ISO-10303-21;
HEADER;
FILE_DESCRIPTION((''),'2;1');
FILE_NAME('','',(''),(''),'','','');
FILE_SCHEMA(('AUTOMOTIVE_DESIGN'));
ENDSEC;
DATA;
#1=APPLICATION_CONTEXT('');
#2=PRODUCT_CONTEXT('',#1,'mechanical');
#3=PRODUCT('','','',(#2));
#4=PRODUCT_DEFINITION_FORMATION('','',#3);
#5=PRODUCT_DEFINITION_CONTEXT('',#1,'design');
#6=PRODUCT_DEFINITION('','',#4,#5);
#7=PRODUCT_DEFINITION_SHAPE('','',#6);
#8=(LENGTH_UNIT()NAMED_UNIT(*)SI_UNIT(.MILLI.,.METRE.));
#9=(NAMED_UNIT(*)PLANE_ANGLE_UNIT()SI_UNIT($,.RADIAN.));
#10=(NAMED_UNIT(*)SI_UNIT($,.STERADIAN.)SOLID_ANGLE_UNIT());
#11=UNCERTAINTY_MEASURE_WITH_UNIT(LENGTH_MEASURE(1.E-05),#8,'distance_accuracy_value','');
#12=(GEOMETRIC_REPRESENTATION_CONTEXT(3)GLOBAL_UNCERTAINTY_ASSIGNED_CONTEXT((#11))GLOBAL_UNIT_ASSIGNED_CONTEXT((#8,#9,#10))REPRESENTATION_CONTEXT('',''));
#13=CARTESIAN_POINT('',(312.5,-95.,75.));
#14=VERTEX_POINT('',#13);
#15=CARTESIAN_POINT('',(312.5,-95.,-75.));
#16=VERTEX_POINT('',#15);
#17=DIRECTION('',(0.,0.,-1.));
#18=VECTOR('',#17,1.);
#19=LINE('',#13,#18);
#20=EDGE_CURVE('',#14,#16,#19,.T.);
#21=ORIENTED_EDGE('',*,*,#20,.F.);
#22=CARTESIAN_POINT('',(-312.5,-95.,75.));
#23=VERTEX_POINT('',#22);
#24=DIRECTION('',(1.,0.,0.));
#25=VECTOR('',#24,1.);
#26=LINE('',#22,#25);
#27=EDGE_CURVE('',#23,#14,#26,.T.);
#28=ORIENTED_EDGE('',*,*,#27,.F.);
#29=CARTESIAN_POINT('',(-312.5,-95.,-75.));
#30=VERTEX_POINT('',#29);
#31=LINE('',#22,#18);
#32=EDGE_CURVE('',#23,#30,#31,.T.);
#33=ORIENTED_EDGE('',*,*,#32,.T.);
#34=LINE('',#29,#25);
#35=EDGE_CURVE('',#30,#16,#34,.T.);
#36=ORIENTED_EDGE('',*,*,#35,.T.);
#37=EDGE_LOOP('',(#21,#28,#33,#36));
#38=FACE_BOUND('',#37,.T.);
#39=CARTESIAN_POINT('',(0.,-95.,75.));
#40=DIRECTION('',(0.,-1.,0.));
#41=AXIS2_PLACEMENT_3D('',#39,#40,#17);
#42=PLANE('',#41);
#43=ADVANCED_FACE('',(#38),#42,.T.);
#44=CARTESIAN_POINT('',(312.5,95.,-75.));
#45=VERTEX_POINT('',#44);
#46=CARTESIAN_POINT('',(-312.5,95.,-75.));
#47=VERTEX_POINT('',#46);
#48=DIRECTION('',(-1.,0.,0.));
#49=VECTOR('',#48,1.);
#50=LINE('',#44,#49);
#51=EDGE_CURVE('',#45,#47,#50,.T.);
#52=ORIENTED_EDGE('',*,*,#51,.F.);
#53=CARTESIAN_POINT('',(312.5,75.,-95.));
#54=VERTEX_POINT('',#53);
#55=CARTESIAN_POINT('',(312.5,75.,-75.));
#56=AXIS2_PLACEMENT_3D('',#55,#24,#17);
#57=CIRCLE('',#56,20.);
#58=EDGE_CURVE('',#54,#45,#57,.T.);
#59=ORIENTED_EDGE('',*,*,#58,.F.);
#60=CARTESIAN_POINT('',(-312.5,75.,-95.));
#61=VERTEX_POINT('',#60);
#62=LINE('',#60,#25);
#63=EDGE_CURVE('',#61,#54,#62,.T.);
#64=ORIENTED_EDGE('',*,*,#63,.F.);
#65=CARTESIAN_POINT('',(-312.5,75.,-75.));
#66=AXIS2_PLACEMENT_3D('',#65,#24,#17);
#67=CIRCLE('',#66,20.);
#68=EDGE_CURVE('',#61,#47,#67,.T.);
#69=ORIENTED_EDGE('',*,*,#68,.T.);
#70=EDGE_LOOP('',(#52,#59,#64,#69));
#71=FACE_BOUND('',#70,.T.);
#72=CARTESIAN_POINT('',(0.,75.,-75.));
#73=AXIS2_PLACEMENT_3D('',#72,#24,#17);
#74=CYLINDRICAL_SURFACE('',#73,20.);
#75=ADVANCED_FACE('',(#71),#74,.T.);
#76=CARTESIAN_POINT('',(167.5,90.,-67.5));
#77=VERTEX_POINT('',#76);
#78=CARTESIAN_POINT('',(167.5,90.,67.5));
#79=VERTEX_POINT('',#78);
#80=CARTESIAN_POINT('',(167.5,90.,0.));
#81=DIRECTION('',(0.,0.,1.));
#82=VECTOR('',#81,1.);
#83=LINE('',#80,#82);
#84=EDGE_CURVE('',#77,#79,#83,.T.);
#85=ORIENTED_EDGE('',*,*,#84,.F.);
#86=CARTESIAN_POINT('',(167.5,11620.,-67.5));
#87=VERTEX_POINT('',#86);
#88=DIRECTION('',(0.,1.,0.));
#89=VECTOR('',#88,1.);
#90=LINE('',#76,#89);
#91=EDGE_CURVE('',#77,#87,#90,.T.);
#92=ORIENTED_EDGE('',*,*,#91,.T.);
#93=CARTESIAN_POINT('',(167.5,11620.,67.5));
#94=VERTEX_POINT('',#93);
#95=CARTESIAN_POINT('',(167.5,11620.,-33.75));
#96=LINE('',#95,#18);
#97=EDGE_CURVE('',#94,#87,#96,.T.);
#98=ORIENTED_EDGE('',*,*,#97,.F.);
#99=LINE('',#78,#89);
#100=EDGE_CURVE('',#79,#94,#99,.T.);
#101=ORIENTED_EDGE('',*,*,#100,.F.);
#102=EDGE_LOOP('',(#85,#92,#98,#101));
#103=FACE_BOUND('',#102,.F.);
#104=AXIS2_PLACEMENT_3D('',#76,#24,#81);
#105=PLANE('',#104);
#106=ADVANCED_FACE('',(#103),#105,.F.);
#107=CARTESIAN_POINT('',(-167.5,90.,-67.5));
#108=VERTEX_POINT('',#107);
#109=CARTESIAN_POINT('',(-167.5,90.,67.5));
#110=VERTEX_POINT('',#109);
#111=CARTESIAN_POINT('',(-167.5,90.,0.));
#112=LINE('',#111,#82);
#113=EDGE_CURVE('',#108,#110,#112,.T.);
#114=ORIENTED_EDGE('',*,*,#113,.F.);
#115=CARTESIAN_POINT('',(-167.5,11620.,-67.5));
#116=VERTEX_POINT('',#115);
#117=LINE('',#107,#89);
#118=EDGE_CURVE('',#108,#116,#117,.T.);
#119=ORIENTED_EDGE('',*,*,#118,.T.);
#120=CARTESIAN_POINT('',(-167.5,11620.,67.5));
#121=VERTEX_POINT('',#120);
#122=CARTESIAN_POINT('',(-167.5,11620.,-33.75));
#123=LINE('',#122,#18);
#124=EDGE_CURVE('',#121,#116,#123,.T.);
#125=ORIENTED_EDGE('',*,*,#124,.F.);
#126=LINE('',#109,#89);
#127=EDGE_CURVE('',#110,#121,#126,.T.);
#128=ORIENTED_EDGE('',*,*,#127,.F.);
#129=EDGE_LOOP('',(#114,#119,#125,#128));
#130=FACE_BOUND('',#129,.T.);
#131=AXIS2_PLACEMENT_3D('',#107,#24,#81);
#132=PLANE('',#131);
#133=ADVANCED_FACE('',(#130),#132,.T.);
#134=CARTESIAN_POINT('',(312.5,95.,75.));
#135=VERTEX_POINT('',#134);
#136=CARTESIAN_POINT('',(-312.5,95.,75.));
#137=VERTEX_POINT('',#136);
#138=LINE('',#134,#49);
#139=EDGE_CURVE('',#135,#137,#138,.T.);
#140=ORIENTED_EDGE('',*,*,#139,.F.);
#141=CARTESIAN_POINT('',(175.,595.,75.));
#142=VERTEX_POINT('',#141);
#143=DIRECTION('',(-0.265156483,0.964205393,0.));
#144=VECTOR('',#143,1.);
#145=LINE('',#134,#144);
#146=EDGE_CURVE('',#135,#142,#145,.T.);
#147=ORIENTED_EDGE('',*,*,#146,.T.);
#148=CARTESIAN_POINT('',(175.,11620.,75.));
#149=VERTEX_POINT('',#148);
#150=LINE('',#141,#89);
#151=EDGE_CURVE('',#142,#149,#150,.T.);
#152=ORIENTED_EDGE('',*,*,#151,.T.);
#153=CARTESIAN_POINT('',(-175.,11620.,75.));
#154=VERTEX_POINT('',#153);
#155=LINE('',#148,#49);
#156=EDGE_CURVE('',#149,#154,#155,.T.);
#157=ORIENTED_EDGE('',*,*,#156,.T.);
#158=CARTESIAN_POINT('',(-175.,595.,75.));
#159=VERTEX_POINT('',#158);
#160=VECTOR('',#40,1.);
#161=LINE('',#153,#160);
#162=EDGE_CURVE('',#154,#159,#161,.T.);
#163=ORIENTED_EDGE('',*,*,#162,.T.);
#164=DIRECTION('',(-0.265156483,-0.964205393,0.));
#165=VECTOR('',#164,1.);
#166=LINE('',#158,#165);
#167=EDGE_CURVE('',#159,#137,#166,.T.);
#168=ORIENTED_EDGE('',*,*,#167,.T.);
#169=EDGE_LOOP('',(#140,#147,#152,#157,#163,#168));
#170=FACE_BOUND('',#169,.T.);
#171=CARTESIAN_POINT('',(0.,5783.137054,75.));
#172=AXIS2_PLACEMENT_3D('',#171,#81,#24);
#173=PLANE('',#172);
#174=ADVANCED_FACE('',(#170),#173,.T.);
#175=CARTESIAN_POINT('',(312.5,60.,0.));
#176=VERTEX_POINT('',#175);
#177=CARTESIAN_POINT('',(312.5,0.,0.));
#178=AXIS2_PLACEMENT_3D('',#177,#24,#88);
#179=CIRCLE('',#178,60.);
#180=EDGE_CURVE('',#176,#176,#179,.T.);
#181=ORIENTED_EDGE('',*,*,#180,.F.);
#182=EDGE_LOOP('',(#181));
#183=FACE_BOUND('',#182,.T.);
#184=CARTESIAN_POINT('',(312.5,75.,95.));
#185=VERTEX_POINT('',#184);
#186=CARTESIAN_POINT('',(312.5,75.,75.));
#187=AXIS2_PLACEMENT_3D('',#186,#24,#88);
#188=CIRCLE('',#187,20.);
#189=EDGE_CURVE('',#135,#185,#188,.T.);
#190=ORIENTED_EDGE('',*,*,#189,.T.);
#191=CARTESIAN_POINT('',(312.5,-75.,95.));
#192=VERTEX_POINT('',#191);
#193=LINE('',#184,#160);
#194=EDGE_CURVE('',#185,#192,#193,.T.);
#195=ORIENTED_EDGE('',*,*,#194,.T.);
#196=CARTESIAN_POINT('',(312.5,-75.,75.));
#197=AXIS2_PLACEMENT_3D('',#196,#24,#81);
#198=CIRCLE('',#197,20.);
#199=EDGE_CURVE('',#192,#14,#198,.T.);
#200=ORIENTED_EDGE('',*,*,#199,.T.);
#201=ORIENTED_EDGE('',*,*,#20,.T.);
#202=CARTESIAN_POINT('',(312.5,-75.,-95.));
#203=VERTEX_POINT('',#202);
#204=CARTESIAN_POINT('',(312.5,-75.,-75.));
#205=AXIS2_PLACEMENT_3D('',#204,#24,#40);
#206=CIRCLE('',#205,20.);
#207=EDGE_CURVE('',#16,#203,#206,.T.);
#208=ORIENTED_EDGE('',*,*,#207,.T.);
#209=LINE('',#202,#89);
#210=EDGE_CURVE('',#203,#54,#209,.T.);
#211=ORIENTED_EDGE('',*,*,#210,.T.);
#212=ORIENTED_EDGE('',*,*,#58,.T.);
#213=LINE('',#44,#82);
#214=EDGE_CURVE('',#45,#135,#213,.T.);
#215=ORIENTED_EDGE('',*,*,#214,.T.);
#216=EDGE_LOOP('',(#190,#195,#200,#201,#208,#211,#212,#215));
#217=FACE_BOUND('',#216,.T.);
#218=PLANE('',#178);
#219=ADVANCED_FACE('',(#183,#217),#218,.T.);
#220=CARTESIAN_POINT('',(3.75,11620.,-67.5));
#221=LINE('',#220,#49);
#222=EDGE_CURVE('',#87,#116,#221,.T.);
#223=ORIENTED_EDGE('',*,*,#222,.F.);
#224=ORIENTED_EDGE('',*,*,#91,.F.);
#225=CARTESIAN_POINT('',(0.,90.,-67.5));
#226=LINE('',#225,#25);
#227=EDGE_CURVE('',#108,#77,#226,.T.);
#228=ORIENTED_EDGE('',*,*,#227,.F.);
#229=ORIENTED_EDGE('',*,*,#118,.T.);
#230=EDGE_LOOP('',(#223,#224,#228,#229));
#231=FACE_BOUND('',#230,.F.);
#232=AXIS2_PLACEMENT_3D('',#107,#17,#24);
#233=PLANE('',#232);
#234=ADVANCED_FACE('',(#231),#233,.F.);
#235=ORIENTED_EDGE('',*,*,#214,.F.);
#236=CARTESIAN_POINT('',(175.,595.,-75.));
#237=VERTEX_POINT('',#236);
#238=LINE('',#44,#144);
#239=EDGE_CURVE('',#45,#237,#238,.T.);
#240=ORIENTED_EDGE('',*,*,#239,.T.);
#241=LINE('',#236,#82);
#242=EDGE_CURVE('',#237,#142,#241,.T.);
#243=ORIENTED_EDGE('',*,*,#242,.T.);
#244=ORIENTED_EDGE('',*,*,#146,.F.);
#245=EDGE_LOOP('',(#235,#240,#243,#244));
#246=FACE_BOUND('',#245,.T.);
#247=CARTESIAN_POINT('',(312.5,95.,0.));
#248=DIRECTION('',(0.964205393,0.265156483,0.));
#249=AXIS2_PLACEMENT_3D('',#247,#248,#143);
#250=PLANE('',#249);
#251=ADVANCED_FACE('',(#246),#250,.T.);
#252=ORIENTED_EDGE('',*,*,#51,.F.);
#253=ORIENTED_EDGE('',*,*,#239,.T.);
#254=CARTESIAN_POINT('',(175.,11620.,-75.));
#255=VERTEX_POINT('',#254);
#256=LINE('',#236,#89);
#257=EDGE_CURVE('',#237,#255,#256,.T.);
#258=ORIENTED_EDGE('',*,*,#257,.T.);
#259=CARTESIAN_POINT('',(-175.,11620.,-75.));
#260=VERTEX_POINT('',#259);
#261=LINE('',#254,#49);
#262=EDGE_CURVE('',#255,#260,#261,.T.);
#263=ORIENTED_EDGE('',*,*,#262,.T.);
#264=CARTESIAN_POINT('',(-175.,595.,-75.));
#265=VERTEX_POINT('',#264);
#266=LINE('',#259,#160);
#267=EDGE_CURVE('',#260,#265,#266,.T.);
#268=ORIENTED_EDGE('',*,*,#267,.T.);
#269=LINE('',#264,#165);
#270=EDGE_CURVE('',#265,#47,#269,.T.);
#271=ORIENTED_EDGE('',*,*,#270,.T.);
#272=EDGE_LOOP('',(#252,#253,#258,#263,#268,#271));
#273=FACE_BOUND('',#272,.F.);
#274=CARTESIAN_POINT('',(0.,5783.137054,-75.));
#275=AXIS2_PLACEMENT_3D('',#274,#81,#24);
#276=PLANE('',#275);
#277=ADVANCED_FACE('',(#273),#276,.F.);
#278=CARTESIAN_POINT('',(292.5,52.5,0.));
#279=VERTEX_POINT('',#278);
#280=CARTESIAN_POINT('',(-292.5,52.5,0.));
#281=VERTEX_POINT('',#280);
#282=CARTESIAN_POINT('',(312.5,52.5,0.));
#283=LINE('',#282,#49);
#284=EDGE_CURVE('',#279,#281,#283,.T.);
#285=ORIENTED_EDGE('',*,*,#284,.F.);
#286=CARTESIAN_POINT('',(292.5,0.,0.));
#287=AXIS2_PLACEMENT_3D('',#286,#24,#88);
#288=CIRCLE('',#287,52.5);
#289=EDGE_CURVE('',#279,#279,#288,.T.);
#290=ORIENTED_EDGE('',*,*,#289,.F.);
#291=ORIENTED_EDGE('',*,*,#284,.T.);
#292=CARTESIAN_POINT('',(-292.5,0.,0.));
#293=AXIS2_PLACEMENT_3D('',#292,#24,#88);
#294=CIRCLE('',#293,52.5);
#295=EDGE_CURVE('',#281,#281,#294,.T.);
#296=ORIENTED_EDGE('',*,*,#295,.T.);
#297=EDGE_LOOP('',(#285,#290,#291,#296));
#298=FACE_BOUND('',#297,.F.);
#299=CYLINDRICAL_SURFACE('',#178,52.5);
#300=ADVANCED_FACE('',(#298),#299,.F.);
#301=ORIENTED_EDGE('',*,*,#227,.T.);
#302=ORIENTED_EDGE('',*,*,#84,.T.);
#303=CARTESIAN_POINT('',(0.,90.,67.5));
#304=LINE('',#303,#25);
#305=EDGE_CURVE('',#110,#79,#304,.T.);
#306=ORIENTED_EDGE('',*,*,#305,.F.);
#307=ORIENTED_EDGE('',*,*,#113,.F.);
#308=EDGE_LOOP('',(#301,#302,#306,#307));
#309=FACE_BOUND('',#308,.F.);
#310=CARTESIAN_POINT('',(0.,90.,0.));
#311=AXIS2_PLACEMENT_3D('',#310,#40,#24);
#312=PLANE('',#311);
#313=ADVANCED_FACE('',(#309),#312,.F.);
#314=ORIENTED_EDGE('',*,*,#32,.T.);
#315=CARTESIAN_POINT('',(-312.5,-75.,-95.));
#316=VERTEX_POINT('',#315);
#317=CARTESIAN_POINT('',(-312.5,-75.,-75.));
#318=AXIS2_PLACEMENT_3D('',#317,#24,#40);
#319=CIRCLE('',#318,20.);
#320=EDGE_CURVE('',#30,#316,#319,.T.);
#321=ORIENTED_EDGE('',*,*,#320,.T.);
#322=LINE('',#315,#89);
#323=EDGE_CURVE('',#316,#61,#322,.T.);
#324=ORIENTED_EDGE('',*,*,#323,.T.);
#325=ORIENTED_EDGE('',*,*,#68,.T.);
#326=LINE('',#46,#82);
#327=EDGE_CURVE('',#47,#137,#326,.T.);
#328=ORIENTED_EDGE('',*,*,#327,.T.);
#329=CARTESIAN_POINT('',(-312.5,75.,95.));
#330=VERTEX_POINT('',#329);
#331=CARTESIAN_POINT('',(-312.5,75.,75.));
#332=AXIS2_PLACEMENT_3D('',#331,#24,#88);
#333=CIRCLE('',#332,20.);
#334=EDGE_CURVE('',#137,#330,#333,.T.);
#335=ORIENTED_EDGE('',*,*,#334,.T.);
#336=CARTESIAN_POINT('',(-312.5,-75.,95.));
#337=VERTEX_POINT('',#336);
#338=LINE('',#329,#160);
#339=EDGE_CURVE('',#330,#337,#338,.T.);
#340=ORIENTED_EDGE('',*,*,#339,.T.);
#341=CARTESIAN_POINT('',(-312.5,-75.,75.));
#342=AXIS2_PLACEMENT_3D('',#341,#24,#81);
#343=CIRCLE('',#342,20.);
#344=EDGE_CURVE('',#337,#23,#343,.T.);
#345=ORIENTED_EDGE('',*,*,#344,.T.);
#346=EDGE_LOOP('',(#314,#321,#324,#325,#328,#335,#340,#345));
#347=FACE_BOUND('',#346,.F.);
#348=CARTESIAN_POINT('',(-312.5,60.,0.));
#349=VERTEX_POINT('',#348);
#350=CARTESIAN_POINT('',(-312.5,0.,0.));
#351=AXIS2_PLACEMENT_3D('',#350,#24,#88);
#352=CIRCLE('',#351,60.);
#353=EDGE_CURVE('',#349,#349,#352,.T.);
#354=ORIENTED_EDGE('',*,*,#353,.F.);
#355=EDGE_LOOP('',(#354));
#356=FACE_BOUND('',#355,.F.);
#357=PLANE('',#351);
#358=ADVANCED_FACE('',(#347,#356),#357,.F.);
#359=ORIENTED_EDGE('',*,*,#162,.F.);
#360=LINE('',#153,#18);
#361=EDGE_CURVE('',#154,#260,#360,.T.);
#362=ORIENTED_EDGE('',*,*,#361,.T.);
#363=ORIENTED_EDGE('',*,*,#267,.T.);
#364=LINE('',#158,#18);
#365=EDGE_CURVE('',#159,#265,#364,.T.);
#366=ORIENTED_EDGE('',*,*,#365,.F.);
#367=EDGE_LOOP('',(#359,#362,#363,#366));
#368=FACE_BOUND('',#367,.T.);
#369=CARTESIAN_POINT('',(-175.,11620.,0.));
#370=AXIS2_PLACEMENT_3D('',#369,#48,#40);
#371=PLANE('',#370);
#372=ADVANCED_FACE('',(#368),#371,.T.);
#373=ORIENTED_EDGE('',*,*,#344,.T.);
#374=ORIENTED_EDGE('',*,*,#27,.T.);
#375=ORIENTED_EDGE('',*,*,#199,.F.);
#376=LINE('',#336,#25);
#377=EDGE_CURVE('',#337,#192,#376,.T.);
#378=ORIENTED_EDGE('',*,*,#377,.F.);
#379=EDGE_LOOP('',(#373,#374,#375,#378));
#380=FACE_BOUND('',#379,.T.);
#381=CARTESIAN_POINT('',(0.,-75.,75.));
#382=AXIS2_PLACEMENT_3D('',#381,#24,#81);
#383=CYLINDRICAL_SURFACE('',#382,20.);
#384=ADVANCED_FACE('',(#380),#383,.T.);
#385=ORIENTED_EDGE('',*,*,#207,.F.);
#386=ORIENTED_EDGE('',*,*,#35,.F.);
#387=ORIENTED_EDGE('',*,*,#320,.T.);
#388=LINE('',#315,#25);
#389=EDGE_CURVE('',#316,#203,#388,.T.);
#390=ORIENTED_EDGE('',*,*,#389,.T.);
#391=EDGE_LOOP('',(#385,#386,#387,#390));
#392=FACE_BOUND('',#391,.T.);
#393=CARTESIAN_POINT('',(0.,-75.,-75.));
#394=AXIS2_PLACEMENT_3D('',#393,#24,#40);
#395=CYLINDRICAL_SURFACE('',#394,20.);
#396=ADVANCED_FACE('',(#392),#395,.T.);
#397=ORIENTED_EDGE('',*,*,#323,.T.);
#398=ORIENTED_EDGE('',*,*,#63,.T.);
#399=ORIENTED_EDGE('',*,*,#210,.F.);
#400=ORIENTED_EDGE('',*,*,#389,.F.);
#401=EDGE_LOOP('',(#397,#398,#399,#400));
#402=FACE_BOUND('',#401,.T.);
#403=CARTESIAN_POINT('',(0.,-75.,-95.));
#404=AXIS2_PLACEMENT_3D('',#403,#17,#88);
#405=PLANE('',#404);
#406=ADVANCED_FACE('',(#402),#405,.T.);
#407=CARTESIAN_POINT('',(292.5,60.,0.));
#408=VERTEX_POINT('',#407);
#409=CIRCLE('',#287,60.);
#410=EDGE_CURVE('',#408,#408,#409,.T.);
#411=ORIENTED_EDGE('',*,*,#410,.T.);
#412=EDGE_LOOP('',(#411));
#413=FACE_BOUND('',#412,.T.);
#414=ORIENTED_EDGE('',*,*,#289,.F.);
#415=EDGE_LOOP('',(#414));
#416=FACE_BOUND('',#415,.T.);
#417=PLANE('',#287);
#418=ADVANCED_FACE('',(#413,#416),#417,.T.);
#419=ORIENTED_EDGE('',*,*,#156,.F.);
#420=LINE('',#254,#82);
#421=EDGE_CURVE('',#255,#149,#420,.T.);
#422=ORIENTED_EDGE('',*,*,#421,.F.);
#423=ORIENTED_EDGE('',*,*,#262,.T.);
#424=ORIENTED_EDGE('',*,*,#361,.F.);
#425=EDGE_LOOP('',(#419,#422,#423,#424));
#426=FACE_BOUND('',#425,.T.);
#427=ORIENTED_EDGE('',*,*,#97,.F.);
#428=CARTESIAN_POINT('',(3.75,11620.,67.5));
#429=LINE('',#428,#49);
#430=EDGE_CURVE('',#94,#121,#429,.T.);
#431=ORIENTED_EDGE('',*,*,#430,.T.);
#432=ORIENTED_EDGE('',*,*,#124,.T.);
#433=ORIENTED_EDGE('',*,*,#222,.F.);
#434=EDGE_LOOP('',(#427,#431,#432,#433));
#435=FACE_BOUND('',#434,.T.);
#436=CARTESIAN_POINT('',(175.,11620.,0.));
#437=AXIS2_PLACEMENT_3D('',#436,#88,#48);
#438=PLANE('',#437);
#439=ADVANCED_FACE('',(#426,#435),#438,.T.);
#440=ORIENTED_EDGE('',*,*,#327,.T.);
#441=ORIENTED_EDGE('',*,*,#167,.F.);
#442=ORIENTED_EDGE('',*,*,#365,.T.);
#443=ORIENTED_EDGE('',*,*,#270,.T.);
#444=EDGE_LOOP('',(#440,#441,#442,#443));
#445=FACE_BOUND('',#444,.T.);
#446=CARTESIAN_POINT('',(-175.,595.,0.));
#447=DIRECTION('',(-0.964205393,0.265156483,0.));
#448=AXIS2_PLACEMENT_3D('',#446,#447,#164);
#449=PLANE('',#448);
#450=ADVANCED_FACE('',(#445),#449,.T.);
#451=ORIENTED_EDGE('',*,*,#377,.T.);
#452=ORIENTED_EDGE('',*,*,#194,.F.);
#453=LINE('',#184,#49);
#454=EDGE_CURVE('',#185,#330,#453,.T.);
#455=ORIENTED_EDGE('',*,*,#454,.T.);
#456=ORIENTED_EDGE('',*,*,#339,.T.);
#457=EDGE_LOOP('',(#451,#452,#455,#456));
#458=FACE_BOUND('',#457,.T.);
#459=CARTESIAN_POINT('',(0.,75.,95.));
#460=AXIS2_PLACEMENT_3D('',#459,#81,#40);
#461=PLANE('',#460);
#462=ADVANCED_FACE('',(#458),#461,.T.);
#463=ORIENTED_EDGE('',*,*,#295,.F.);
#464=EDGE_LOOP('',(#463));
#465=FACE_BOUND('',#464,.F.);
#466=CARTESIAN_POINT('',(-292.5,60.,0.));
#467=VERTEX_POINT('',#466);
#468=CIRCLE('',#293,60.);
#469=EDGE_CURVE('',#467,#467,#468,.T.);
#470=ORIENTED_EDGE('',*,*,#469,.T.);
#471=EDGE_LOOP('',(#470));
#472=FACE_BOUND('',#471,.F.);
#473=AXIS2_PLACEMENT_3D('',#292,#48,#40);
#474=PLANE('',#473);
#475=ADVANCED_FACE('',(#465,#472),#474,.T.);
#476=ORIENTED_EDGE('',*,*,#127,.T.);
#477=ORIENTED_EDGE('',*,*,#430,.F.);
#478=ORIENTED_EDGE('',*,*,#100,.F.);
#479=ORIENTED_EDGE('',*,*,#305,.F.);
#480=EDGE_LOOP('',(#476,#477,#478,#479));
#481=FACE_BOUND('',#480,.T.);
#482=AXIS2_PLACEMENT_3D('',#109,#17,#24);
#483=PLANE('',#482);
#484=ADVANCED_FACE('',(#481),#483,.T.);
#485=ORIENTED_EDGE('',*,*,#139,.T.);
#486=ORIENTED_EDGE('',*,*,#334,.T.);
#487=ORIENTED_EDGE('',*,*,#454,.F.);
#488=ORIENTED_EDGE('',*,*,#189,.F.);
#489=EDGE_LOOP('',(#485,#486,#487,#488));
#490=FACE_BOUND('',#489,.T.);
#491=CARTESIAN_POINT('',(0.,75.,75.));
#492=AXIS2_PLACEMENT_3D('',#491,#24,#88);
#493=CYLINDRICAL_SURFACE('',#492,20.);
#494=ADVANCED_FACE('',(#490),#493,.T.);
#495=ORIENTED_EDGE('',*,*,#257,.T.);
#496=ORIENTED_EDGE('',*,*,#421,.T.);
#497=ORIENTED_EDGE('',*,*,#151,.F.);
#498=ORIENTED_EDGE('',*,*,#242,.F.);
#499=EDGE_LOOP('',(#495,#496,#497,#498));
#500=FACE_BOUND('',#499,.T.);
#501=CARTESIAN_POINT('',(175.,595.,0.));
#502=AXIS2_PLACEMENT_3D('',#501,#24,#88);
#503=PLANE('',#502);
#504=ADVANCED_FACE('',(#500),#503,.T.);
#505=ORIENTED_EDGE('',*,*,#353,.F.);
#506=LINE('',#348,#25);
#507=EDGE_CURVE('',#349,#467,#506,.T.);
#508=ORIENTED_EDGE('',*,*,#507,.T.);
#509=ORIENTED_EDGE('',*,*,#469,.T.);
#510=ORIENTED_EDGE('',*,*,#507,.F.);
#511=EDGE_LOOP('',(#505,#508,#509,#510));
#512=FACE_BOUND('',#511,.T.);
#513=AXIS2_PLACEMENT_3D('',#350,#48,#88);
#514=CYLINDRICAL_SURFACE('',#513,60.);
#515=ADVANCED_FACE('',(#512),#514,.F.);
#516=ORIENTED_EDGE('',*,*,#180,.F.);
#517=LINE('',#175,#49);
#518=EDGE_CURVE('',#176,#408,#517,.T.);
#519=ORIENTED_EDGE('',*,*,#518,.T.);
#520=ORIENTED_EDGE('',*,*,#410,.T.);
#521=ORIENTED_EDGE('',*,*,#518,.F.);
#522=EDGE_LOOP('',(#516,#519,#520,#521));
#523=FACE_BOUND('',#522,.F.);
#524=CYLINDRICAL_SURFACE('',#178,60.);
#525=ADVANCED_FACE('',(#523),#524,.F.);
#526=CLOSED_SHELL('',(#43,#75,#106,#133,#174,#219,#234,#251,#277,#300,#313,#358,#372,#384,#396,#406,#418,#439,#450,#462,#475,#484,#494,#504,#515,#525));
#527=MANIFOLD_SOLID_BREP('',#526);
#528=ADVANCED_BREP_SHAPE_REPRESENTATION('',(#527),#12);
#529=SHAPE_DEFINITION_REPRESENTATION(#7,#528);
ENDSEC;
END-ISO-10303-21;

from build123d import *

# Parameters (mm, degrees)
F0_R     = 60
F0_R_2   = 53.033
F1_DEPTH = 312.5
F2_R     = 52.5
F3_DEPTH = 625.001
F2_R_2   = 60
F4_DEPTH = 20
F6_DEPTH = 75
F8_W     = 335
F8_H     = 135
F9_DEPTH = 11530.001


# Not quite as in the source:
# - a pattern or mirror of a feature is missing from the dataset's text; its kind, count and spacing are read off the source's solid


with BuildPart() as f1:
    # F0 (on Right) → F1 (new body, symmetric)
    with BuildSketch(Plane.YZ):
        with BuildLine():
            Line((75, 95), (-75, 95))
            ThreePointArc((-75, 95), (-89.1421356237, 89.1421356237), (-95, 75))
            Line((-95, 75), (-95, -75))
            ThreePointArc((-95, -75), (-89.1421356237, -89.1421356237), (-75, -95))
            Line((-75, -95), (75, -95))
            ThreePointArc((75, -95), (89.1421356237, -89.1421356237), (95, -75))
            Line((95, -75), (95, 75))
            ThreePointArc((95, 75), (89.1421356237, 89.1421356237), (75, 95))
        make_face()
        Circle(F0_R, mode=Mode.SUBTRACT)
        Circle(F0_R)
        Circle(F0_R_2, mode=Mode.SUBTRACT)
        Circle(F0_R_2)
    extrude(amount=F1_DEPTH, both=True)

    # F2 (on face) → F3 (cut, through all)
    with BuildSketch(Plane.YZ.offset(312.5)):
        Circle(F2_R)
    extrude(amount=-F3_DEPTH, mode=Mode.SUBTRACT)

    # F2 (on face) → F4 (cut)
    with BuildSketch(Plane.YZ.offset(312.5)):
        Circle(F2_R_2)
        Circle(F2_R, mode=Mode.SUBTRACT)
    f4 = extrude(amount=-F4_DEPTH, mode=Mode.SUBTRACT)

    # F4_copies: F4 across plane
    add(f4.mirror(Plane(origin=(0, 0, 0), x_dir=(0, 0, -1), z_dir=(-1, 0, 0))), mode=Mode.SUBTRACT)

    # F5 (on Top) → F6 (join, symmetric)
    with BuildSketch(Plane.XY):
        Polygon((-312.5, 95), (312.5, 95), (175, 595), (175, 11620), (0, 11620), (-175, 11620), (-175, 595), align=None)
    extrude(amount=F6_DEPTH, both=True)

    # F8 (on offset) → F9 (cut, through all)
    with BuildSketch(Plane.XZ.offset(-90)):
        Rectangle(F8_W, F8_H)
    extrude(amount=-F9_DEPTH, mode=Mode.SUBTRACT)


solid = f1.part
